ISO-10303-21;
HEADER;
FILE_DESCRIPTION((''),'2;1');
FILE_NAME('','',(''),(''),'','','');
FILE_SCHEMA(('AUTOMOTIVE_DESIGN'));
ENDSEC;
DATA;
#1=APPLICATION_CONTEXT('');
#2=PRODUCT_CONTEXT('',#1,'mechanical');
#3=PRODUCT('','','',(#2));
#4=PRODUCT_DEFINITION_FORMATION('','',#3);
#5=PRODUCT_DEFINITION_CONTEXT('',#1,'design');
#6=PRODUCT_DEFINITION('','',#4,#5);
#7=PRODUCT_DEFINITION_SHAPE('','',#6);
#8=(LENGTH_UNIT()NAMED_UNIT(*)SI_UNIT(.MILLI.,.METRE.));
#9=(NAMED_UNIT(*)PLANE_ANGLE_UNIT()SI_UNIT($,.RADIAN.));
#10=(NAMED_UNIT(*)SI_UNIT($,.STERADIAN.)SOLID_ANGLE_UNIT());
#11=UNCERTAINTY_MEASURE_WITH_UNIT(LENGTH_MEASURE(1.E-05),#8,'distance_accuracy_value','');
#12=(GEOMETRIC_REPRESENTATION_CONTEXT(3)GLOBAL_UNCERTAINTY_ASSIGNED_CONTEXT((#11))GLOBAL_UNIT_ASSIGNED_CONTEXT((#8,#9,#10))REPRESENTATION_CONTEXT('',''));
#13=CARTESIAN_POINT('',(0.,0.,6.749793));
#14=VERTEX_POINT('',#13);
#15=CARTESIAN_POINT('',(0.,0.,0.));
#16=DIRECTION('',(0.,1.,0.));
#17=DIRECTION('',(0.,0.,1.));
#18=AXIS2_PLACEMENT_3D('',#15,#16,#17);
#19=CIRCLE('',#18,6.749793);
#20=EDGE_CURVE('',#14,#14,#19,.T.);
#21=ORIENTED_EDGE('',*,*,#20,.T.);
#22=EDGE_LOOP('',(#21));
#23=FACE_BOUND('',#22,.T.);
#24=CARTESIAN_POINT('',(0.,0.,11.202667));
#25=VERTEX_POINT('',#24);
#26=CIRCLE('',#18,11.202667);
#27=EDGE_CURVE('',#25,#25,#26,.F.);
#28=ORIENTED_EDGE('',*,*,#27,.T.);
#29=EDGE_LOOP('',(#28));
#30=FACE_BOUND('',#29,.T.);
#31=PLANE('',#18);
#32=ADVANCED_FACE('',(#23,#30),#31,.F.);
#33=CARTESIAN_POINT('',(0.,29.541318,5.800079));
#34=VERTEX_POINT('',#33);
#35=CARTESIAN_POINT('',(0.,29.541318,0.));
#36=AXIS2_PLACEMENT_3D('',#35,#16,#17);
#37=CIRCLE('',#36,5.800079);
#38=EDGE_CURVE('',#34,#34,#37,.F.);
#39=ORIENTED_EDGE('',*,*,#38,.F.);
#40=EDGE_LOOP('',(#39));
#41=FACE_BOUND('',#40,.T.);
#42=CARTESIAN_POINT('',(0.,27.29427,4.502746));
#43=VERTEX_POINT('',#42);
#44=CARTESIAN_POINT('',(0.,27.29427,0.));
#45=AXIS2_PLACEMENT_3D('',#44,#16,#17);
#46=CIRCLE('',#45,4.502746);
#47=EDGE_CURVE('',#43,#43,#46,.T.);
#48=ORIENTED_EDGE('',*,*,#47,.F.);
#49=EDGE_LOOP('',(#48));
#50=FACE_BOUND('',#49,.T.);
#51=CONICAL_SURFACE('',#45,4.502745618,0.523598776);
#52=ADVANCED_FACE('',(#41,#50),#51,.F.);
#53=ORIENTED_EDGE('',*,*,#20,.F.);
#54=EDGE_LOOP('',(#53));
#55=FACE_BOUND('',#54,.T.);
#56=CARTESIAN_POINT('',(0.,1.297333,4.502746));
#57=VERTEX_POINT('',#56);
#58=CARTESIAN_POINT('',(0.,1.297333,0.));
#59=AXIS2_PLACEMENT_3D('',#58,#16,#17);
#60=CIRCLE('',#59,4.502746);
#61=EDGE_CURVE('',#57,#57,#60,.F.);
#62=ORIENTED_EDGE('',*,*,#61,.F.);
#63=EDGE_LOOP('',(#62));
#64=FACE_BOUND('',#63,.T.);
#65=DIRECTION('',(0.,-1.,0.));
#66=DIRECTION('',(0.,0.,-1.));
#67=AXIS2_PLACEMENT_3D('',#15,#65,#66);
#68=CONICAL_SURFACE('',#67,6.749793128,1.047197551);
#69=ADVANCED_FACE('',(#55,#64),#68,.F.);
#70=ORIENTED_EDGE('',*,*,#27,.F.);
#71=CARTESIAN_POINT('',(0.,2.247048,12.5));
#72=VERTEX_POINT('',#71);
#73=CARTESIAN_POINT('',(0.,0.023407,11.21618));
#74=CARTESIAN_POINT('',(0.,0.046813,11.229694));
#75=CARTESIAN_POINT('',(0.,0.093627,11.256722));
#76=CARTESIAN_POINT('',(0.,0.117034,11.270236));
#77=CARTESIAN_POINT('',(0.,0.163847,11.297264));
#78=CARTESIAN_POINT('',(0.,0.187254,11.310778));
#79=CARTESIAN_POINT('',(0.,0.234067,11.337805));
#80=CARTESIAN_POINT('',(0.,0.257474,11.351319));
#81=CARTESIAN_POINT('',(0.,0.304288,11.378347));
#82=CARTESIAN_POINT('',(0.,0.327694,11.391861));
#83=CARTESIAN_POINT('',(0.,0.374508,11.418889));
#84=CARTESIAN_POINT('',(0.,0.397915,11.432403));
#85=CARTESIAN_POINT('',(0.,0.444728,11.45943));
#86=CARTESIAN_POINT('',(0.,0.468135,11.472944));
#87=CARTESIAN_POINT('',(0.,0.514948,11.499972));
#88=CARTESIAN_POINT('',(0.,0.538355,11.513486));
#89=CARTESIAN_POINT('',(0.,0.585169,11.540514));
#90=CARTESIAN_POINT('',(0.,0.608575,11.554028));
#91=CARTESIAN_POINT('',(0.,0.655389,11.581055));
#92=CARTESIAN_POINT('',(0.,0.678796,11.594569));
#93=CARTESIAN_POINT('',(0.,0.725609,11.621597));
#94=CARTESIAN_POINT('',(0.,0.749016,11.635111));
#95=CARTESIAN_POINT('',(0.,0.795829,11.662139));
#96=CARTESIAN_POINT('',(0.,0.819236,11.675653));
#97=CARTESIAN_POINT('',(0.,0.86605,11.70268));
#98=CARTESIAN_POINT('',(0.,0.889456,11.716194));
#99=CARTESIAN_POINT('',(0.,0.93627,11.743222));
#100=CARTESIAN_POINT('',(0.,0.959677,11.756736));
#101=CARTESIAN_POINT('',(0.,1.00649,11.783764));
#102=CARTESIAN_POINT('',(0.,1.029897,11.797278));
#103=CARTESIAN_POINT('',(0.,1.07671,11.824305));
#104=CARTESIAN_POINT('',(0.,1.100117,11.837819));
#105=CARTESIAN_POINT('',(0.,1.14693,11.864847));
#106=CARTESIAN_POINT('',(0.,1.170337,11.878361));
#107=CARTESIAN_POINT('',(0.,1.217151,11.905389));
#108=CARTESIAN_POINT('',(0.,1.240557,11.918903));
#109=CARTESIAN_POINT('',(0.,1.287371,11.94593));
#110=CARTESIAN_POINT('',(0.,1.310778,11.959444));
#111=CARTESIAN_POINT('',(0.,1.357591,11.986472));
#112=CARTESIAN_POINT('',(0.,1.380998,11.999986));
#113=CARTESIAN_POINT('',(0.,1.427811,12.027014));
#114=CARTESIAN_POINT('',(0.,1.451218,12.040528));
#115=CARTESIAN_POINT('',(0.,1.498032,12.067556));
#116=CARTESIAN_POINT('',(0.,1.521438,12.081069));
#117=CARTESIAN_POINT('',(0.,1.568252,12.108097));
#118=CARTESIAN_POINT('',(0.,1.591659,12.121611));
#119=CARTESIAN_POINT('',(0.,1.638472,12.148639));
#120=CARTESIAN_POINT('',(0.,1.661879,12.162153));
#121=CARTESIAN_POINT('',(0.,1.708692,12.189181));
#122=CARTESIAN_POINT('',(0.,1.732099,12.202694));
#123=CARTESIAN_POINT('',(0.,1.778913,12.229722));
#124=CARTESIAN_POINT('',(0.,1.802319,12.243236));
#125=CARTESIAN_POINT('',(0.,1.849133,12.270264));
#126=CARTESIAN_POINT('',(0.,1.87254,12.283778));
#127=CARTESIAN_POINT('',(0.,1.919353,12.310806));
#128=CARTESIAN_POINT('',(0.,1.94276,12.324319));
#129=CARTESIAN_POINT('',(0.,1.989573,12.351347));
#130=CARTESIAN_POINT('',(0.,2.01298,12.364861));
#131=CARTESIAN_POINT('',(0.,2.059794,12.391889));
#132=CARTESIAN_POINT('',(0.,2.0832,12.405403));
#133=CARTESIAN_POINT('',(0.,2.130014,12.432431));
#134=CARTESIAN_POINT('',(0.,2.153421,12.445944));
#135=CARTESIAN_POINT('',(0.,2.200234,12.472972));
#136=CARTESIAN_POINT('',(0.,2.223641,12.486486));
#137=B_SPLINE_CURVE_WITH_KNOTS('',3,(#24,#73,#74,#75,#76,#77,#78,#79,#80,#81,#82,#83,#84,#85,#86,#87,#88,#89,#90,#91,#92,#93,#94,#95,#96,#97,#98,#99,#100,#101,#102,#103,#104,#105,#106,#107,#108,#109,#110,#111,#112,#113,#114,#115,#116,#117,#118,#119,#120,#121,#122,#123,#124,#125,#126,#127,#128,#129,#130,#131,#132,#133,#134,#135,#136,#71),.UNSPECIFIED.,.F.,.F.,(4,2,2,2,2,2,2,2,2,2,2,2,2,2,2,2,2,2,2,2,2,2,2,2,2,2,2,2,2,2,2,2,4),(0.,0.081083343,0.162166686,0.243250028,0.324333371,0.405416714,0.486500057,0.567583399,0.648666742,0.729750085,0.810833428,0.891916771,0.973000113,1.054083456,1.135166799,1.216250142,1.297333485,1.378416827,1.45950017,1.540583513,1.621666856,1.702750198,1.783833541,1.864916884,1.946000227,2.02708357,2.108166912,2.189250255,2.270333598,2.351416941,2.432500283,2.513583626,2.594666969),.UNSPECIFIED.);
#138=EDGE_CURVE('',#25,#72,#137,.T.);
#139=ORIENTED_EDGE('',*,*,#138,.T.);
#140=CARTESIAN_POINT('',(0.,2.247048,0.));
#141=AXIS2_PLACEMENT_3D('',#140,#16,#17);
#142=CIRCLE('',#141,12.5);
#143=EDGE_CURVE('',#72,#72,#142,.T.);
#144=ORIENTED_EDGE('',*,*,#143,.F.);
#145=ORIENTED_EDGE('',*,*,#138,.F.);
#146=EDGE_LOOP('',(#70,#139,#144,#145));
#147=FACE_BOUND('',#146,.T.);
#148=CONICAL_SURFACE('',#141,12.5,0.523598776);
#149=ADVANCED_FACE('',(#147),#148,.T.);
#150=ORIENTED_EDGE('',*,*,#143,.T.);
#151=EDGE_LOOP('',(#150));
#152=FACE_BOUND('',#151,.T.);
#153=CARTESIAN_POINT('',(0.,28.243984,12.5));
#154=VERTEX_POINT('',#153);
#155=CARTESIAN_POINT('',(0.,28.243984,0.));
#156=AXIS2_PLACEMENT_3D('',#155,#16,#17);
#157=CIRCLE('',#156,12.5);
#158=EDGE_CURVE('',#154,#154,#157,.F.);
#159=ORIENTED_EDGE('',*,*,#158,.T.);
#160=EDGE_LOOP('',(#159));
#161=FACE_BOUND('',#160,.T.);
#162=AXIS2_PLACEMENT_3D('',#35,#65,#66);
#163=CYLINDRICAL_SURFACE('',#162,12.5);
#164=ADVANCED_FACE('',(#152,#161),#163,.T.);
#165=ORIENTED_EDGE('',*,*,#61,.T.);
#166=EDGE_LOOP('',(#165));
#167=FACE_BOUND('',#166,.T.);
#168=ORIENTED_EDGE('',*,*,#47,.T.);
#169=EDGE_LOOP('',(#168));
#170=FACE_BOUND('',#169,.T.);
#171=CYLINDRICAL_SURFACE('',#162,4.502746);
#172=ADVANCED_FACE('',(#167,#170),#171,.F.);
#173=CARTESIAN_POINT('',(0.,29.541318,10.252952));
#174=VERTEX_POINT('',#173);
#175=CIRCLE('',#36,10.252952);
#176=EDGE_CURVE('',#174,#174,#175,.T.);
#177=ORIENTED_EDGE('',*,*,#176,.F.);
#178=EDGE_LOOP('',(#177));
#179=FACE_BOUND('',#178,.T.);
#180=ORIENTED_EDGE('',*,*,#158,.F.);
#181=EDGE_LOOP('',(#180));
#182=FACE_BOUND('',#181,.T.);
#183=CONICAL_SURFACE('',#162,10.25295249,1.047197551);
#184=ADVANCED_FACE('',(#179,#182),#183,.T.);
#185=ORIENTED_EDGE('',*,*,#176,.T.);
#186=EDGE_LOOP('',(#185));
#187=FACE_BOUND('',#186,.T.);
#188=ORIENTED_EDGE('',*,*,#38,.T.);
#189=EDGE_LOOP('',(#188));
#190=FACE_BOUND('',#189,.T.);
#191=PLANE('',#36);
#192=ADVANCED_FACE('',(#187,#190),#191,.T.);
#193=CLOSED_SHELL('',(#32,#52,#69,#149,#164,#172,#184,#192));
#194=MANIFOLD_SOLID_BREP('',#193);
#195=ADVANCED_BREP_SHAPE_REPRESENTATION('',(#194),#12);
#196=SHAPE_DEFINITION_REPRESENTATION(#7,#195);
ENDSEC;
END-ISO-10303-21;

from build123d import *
from OCP.BRepFilletAPI import BRepFilletAPI_MakeChamfer

# Parameters (mm, degrees)
SKETCH1_R           = 12.5
BOSS_EXTRUDE1_DEPTH = 29.541317558
SKETCH2_R           = 4.502745618
CUT_EXTRUDE1_DEPTH  = 35.426580473
CHAMFER1_SIZE       = 1.297333485
CHAMFER1_SIZE2      = 2.24704751


with BuildPart() as part:
    # Sketch1 → Boss-Extrude1 (new body)
    with BuildSketch(Plane(origin=(0, 0, 0), x_dir=(1, 0, 0), z_dir=(0, 1, 0))):
        Circle(SKETCH1_R)
    extrude(amount=BOSS_EXTRUDE1_DEPTH)

    # Sketch2 → Cut-Extrude1 (cut, through all)
    with BuildSketch(Plane(origin=(0, 0, 0), x_dir=(1, 0, 0), z_dir=(0, 1, 0))):
        Circle(SKETCH2_R)
    extrude(amount=CUT_EXTRUDE1_DEPTH, mode=Mode.SUBTRACT)

    # Chamfer1: one chamfer whose edges measure the first distance from different faces: ONE call of the kernel's chamfer builder (chamfer() names one face for all edges)
    chamfer1_edges_1 = [part.edges().sort_by_distance(p)[0] for p in [
        (-4.502745618, 29.541317558, 0),
    ]]
    chamfer1_side_1 = [part.faces().sort_by_distance(p)[0] for p in [
        (-12.146446609, 29.541317558, 0),
    ]]
    chamfer1_edges_2 = [part.edges().sort_by_distance(p)[0] for p in [
        (-4.502745618, 0, 0),
    ]]
    chamfer1_side_2 = [part.faces().sort_by_distance(p)[0] for p in [
        (-4.502745618, 14.770658779, 0),
    ]]
    chamfer1_edges_3 = [part.edges().sort_by_distance(p)[0] for p in [
        (-12.5, 0, 0),
    ]]
    chamfer1_side_3 = [part.faces().sort_by_distance(p)[0] for p in [
        (-12.146446609, 0, 0),
    ]]
    chamfer1_edges_4 = [part.edges().sort_by_distance(p)[0] for p in [
        (-12.5, 29.541317558, 0),
    ]]
    chamfer1_side_4 = [part.faces().sort_by_distance(p)[0] for p in [
        (-12.5, 14.770658779, 0),
    ]]
    chamfer1 = BRepFilletAPI_MakeChamfer(part.part.solid().wrapped)
    for e in chamfer1_edges_1:
        chamfer1.Add(CHAMFER1_SIZE, CHAMFER1_SIZE2, e.wrapped, chamfer1_side_1[0].wrapped)  # the first distance lies on this face
    for e in chamfer1_edges_2:
        chamfer1.Add(CHAMFER1_SIZE, CHAMFER1_SIZE2, e.wrapped, chamfer1_side_2[0].wrapped)  # the first distance lies on this face
    for e in chamfer1_edges_3:
        chamfer1.Add(CHAMFER1_SIZE, CHAMFER1_SIZE2, e.wrapped, chamfer1_side_3[0].wrapped)  # the first distance lies on this face
    for e in chamfer1_edges_4:
        chamfer1.Add(CHAMFER1_SIZE, CHAMFER1_SIZE2, e.wrapped, chamfer1_side_4[0].wrapped)  # the first distance lies on this face
    add(Compound.cast(chamfer1.Shape()), mode=Mode.REPLACE)


solid = part.part
